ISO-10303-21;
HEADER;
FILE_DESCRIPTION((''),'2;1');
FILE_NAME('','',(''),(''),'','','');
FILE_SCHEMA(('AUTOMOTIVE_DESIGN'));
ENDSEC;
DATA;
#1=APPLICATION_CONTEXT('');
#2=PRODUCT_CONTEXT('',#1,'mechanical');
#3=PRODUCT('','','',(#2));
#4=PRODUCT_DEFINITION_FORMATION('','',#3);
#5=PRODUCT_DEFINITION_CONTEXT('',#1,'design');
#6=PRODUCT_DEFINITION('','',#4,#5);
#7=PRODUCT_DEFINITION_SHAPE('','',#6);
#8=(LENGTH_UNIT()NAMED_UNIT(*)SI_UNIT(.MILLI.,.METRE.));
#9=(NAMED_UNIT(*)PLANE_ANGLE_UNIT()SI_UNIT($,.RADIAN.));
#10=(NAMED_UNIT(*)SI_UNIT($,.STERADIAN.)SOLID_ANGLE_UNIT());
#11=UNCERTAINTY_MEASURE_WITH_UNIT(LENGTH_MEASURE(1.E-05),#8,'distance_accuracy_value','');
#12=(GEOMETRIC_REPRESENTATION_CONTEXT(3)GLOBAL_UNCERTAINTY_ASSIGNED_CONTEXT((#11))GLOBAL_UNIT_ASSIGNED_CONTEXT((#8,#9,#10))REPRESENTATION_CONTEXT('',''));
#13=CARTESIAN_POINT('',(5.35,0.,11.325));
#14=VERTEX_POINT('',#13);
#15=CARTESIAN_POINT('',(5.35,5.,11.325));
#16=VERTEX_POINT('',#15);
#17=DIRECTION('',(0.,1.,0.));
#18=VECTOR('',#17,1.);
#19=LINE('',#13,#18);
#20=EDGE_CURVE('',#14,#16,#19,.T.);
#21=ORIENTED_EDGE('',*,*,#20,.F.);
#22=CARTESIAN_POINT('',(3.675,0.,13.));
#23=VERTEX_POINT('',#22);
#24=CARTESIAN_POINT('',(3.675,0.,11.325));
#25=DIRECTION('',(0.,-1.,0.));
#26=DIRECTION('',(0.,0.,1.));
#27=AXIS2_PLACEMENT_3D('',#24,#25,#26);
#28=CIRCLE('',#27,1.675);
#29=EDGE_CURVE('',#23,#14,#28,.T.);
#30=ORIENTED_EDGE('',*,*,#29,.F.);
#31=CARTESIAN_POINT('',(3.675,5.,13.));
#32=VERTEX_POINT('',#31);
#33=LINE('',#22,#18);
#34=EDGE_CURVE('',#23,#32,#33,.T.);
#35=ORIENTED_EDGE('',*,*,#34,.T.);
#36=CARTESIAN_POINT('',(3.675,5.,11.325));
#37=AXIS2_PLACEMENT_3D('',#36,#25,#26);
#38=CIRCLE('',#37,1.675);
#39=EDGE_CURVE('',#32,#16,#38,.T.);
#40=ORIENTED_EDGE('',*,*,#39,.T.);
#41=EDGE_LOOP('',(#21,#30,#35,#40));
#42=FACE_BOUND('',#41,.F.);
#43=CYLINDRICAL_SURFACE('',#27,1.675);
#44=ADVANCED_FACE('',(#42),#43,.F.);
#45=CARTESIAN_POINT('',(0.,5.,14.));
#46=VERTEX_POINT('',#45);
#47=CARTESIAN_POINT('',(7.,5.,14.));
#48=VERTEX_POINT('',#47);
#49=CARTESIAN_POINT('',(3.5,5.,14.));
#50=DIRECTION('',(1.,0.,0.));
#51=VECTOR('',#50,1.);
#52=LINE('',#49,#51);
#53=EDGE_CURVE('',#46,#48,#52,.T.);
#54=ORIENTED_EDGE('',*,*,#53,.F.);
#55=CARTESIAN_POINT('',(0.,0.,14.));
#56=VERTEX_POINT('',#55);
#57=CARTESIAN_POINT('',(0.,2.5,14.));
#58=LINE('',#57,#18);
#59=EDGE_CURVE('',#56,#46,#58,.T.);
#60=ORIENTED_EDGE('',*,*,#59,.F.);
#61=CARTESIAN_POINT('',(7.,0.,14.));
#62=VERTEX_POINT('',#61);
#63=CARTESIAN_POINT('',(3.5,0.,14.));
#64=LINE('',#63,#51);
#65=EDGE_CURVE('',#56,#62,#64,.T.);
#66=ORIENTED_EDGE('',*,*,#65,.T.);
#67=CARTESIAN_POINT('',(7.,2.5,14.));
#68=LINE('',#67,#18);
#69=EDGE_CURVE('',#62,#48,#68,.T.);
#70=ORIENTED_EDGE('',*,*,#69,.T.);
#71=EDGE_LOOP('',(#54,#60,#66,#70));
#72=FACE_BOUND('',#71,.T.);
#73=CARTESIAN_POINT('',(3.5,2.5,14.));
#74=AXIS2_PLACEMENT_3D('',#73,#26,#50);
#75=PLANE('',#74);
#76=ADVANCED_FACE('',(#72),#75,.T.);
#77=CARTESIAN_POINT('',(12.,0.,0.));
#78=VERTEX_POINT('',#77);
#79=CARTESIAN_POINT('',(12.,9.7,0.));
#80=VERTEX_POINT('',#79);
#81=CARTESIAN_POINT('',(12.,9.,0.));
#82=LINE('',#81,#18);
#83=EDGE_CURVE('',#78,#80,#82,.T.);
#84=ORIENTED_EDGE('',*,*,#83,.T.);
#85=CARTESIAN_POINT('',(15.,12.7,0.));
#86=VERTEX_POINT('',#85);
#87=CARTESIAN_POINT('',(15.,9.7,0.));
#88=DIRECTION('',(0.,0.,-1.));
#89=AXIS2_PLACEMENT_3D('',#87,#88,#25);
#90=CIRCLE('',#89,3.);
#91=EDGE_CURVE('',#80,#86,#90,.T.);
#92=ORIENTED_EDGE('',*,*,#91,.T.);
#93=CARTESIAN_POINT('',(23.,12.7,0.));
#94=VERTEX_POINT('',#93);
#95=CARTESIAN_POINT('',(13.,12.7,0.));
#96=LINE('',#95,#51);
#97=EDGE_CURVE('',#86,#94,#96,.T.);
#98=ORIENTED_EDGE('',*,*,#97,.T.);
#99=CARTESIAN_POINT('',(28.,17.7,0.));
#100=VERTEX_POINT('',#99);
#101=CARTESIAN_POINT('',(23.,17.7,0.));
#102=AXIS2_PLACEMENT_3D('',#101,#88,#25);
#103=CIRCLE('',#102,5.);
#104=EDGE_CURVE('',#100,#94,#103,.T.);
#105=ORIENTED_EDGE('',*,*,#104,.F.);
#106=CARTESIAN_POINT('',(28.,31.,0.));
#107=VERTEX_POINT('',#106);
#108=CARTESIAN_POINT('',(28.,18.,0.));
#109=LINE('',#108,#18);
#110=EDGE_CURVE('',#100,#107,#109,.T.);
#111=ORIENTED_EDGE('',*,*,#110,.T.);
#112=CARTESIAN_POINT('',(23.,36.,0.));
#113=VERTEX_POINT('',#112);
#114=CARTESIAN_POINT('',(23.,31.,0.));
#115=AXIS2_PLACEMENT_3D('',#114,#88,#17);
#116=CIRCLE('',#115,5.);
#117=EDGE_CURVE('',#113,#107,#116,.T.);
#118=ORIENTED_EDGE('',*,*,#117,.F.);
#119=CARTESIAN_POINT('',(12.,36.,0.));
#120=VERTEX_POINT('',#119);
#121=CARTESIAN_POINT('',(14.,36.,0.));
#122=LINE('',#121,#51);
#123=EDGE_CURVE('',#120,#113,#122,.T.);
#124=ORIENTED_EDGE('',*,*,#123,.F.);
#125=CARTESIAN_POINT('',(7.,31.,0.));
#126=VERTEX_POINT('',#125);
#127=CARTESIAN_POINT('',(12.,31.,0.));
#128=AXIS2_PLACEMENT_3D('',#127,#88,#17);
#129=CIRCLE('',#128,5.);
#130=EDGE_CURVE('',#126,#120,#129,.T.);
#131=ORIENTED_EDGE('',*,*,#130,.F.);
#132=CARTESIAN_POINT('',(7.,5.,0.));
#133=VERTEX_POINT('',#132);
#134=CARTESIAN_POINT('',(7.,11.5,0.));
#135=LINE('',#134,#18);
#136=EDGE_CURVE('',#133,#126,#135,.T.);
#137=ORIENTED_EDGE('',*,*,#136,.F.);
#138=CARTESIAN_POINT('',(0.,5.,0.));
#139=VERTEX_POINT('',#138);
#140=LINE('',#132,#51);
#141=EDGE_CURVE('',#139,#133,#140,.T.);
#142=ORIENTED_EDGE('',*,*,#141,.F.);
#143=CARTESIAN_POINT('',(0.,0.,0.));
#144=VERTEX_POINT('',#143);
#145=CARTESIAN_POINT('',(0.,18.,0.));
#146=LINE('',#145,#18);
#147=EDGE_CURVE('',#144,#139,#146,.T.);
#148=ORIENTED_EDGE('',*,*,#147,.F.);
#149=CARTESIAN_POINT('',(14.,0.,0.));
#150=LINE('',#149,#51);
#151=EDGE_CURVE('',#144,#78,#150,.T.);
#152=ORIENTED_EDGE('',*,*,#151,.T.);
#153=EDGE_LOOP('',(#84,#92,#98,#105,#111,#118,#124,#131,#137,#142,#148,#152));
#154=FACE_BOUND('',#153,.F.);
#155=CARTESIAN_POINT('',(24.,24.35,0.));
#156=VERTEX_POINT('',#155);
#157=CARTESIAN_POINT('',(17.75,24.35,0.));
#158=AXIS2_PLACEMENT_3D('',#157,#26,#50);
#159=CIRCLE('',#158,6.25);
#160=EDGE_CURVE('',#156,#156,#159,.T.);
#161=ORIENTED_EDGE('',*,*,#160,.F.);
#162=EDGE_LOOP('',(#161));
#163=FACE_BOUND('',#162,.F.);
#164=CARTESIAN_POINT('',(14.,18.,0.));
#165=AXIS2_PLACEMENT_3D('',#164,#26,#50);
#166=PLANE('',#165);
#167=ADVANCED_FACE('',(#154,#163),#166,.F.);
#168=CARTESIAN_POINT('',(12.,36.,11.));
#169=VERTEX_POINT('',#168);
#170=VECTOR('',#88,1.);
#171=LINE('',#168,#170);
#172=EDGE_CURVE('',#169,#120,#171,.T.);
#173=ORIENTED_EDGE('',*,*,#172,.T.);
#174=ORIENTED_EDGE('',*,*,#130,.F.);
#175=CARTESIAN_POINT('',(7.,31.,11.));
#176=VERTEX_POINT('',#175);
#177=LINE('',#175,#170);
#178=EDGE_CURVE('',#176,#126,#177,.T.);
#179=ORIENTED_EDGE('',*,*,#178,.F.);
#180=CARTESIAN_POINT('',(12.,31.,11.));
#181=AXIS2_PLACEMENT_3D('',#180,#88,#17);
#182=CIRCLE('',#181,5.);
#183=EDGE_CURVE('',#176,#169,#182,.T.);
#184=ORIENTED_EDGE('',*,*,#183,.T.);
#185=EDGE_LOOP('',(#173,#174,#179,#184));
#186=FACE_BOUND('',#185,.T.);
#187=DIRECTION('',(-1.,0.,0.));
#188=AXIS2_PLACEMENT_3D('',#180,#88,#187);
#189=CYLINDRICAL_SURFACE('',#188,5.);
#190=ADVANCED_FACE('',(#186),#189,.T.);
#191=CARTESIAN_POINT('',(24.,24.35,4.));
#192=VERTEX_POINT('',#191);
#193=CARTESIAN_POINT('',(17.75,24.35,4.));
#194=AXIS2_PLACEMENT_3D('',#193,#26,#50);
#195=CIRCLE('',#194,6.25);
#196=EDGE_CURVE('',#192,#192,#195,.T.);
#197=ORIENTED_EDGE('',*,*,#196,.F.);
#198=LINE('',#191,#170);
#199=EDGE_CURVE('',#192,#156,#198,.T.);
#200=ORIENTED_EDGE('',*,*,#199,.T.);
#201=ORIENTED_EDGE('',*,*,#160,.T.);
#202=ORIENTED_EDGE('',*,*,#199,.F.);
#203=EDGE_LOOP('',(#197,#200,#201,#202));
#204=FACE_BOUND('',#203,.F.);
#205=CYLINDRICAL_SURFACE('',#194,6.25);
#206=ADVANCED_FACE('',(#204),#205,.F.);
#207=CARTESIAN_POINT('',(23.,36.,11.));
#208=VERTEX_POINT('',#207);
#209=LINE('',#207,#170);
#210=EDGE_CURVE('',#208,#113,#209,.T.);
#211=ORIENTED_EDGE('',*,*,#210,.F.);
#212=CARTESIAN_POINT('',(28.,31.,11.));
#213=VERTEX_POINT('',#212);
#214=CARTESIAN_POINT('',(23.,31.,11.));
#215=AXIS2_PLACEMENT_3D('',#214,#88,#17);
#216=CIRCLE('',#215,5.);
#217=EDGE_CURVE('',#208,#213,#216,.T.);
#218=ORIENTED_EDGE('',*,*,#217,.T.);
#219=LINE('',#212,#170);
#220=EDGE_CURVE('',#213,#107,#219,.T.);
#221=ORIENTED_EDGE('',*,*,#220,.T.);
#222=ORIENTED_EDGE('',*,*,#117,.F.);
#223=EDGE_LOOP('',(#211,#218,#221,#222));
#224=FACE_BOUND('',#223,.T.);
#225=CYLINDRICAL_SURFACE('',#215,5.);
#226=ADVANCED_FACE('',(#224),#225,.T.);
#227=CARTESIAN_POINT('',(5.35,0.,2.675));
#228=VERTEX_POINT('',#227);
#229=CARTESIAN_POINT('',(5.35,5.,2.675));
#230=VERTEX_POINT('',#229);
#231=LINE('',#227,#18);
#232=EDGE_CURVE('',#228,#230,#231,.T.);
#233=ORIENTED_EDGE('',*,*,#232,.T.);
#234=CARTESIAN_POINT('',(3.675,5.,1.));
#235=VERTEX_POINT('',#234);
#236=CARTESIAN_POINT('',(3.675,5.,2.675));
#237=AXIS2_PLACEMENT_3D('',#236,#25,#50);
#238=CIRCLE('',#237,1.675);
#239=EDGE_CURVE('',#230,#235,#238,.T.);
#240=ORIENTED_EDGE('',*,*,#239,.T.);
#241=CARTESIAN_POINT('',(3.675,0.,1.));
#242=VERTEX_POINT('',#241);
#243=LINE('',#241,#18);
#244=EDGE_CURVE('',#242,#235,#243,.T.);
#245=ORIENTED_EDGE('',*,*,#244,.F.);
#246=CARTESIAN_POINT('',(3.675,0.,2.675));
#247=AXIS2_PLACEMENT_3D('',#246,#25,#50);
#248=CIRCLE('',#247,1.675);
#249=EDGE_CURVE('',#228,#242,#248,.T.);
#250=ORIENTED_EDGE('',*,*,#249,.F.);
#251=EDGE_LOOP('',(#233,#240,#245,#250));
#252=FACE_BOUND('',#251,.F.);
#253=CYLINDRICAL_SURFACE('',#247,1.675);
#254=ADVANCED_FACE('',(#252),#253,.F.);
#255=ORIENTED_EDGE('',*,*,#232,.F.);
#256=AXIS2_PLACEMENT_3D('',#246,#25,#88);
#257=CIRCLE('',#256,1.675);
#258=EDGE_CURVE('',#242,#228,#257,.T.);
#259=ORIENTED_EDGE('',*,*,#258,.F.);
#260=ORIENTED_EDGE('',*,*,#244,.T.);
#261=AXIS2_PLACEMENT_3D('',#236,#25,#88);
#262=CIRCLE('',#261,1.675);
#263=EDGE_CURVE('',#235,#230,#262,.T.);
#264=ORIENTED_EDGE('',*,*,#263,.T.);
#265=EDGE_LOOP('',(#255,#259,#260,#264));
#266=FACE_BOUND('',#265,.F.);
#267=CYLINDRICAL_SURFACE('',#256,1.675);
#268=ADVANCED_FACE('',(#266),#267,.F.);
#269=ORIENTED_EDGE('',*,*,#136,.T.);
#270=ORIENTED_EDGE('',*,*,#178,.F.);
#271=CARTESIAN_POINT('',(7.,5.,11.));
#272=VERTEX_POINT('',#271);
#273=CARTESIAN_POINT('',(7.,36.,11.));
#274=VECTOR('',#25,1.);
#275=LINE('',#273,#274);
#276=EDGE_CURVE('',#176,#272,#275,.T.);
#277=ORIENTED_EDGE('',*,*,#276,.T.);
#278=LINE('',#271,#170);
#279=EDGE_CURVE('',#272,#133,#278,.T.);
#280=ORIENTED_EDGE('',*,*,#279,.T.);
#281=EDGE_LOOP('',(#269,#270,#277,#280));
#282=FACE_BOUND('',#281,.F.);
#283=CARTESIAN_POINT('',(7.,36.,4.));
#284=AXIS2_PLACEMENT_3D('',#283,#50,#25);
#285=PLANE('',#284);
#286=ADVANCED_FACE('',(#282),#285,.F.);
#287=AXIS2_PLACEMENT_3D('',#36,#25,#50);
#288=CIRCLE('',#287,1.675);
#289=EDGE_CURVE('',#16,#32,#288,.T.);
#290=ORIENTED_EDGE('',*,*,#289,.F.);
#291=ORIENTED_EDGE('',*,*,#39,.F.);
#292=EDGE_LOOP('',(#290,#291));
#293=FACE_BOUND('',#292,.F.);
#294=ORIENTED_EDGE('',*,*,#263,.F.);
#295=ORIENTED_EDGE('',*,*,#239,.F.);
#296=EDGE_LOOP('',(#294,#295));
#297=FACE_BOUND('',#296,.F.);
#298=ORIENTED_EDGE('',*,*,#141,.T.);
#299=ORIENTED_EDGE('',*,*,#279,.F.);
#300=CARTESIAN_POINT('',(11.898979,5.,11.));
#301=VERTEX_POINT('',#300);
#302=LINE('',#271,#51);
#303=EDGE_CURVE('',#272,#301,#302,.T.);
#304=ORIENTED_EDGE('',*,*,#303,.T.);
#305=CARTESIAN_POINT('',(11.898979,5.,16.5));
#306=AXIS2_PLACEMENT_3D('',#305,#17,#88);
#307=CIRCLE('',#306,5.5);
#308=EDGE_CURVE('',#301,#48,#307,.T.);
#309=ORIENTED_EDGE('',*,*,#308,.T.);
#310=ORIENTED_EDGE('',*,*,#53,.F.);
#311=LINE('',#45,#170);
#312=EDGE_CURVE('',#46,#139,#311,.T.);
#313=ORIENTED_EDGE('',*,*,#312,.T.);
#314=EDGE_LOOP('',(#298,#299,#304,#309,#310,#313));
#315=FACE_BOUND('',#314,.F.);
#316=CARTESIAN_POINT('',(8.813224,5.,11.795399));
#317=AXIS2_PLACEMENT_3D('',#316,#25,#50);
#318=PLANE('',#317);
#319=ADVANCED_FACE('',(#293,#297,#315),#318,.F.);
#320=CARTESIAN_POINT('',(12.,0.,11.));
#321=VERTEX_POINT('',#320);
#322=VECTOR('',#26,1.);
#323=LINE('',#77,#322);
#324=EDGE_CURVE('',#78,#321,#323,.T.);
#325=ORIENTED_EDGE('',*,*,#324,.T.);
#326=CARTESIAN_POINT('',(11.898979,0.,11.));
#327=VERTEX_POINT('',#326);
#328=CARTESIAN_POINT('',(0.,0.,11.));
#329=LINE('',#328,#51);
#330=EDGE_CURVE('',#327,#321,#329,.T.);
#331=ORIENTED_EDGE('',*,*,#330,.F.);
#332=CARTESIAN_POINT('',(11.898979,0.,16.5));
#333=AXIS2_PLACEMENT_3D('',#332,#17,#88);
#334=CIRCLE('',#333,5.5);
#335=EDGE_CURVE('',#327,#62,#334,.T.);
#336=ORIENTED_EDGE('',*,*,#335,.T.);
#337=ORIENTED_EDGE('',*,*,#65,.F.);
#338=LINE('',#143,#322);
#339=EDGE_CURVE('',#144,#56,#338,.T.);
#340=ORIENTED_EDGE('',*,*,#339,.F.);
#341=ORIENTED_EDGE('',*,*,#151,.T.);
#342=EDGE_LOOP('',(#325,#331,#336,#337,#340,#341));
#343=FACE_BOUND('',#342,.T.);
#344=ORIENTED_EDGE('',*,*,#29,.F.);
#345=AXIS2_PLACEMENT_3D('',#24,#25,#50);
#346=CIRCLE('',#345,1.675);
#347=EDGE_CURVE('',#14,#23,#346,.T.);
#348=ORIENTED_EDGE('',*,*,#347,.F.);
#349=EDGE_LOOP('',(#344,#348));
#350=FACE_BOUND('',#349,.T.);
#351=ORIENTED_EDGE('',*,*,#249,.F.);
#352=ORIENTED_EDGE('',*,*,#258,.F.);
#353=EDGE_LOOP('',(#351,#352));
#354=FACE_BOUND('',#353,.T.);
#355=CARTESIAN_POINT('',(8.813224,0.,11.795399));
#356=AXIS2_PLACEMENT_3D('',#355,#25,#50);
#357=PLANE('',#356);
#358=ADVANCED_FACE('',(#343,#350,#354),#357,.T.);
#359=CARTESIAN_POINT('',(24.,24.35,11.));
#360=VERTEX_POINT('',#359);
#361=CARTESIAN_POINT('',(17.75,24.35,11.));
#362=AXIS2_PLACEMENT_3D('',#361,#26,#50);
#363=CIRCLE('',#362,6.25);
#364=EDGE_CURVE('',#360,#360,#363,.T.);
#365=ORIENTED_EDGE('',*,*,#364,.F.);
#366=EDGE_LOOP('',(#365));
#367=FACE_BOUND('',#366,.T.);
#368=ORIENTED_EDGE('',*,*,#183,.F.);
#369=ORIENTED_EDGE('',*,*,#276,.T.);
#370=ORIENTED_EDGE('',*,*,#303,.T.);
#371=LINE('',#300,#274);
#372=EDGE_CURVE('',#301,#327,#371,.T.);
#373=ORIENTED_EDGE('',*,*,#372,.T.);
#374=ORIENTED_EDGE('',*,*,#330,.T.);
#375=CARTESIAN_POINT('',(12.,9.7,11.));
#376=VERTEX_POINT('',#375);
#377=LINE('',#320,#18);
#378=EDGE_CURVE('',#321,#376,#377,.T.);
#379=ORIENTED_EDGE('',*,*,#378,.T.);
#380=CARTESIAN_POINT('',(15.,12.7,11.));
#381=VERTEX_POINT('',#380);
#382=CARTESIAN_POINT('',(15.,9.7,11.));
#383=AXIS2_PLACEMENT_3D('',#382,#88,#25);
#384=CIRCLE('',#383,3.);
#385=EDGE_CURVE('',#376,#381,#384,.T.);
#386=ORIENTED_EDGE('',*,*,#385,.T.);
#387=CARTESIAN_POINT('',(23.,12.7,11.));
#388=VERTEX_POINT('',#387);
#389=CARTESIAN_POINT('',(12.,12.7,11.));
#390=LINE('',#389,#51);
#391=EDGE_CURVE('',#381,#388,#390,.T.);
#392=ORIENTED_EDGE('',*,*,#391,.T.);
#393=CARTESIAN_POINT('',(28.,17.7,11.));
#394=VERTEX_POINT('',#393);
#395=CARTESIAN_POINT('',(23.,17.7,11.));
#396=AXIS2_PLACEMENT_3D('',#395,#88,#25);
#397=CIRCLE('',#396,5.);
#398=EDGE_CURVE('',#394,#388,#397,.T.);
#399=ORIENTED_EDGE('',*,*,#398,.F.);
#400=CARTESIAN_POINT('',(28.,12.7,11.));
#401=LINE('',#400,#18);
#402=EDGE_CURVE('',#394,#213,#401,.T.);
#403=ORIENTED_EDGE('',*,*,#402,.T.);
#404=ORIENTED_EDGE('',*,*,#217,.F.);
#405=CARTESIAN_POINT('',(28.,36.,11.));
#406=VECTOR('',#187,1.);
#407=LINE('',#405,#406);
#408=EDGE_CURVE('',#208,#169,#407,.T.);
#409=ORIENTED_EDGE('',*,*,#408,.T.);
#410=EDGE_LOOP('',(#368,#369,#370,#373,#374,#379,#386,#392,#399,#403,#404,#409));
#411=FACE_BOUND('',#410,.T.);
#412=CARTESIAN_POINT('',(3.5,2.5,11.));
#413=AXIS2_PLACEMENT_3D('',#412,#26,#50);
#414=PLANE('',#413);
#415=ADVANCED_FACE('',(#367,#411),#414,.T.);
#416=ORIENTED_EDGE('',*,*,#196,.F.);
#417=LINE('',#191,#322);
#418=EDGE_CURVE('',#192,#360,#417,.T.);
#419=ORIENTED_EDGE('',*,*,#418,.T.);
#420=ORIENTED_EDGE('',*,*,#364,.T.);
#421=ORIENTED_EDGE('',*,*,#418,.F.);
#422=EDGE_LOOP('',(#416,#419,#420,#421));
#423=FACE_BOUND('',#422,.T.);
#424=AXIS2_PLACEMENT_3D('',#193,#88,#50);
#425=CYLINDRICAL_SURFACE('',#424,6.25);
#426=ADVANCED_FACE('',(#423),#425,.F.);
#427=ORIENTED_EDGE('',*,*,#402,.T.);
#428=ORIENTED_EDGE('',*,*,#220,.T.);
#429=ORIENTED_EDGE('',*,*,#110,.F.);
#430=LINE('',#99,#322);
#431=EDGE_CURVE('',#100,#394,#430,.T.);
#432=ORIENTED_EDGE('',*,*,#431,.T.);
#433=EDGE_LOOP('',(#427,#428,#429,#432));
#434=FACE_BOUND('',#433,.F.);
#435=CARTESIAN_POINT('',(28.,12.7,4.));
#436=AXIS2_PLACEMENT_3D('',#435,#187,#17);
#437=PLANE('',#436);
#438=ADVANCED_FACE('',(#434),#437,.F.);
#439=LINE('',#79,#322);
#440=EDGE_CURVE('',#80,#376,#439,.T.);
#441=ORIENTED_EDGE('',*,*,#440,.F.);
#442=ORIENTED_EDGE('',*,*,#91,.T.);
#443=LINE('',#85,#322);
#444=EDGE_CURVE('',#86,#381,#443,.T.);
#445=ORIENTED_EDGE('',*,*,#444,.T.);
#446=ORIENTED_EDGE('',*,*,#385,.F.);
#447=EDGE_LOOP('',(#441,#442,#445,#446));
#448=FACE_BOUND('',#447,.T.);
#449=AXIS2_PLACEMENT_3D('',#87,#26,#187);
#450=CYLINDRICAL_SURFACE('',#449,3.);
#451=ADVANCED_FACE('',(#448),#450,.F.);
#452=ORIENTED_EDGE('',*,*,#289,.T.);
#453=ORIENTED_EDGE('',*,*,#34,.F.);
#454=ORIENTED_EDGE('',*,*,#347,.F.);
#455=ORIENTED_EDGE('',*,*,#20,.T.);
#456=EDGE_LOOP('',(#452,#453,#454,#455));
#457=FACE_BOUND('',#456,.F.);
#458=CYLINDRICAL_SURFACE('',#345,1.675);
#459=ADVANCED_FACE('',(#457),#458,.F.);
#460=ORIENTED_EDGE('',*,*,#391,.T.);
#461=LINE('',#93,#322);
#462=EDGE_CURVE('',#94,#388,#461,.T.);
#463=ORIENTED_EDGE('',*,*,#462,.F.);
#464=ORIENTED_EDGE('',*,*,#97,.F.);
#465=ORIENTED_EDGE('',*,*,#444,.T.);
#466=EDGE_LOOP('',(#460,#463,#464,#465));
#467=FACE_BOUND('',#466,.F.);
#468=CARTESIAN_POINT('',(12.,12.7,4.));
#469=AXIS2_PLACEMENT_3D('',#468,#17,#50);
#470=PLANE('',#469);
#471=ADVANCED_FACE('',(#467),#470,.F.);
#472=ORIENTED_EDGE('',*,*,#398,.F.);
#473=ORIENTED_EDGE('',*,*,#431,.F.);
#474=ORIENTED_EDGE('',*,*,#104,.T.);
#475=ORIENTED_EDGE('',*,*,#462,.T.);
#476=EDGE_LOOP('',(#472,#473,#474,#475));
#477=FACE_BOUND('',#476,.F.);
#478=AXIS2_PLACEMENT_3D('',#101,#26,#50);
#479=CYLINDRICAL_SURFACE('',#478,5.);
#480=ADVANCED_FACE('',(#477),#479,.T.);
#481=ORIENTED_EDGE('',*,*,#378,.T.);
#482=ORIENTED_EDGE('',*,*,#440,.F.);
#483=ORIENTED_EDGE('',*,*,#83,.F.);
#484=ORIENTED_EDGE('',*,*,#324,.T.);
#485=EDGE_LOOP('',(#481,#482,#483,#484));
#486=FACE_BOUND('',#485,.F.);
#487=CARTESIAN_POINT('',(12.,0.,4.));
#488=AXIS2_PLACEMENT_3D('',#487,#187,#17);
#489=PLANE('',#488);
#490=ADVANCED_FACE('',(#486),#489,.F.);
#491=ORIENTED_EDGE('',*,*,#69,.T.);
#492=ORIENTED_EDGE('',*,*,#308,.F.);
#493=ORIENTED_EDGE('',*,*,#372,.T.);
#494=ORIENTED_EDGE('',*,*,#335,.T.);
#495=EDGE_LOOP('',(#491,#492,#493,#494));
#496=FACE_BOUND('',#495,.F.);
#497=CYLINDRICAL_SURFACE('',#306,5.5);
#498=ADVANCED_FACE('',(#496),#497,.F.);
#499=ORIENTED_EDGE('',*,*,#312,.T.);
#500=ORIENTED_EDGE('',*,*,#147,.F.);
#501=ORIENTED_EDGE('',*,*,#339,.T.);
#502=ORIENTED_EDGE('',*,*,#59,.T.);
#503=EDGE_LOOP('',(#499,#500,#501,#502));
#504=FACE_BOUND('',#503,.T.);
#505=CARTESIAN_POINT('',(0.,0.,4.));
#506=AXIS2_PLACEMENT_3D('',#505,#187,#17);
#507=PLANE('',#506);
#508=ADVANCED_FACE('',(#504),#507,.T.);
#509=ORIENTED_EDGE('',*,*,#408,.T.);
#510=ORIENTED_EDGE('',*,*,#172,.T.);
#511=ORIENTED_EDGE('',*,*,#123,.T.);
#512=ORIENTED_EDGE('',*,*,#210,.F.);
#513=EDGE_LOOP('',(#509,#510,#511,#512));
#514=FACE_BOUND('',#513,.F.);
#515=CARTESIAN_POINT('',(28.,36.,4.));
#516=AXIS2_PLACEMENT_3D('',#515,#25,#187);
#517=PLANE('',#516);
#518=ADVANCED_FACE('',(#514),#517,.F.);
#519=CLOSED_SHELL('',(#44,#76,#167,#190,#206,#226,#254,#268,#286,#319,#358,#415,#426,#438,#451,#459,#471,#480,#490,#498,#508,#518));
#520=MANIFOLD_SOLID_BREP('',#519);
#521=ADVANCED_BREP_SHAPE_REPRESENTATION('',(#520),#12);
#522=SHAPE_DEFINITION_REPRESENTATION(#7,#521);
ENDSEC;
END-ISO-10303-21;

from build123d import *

# Parameters (mm, degrees)
F0_W         = 28
F0_H         = 36
F1_DEPTH     = 4
F2_R         = 6.25
F2_W         = 7
F2_H         = 31
F2_W_2       = 16
F2_H_2       = 12.7
F3_DEPTH     = 25
F4_W         = 7
F4_H         = 5
F4_R         = 6.25
F5_DEPTH     = 7
F6_DEPTH     = 10
F8_DEPTH     = 25
F9_R         = 5
F10_R        = 3
F11_T1_DEPTH = 5


# Not quite as in the source:
# - a fillet or chamfer that OpenCascade refuses, or shapes differently, is made with other operations: its cross-section is extruded or revolved along the edge and cut away or added


with BuildPart() as f1:
    # F0 (on Top) → F1 (new body)
    with BuildSketch(Plane.XY):
        with Locations((14, 18)):
            Rectangle(F0_W, F0_H)
    extrude(amount=F1_DEPTH)

    # F2 (on face) → F3 (cut)
    with BuildSketch(Plane.XY.offset(4)):
        with Locations((17.75, 24.35)):
            Circle(F2_R)
        with Locations((3.5, 20.5)):
            Rectangle(F2_W, F2_H)
        with Locations((20, 6.35)):
            Rectangle(F2_W_2, F2_H_2)
    extrude(amount=-F3_DEPTH, mode=Mode.SUBTRACT)

    # F4 (on face) → F5 (join)
    with BuildSketch(Plane.XY.offset(4)):
        with Locations((3.5, 2.5)):
            Rectangle(F4_W, F4_H)
        Polygon((7, 36), (7, 5), (7, 0), (12, 0), (12, 12.7), (28, 12.7), (28, 36), align=None)
        with Locations((17.75, 24.35)):
            Circle(F4_R, mode=Mode.SUBTRACT)
    extrude(amount=F5_DEPTH)

    # F4 (on face) → F6 (join)
    with BuildSketch(Plane.XY.offset(4)):
        with Locations((3.5, 2.5)):
            Rectangle(F4_W, F4_H)
    extrude(amount=F6_DEPTH)

    # F7 (on face) → F8 (cut)
    with BuildSketch(Plane.XZ):
        with BuildLine():
            ThreePointArc((3.675, 13), (2.4905961415, 10.1405961415), (5.35, 11.325))
            ThreePointArc((5.35, 11.325), (4.8594038585, 12.5094038585), (3.675, 13))
        make_face()
        with BuildLine():
            ThreePointArc((3.675, 1), (4.8594038585, 1.4905961415), (5.35, 2.675))
            ThreePointArc((5.35, 2.675), (2.4905961415, 3.8594038585), (3.675, 1))
        make_face()
    extrude(amount=-F8_DEPTH, mode=Mode.SUBTRACT)

    # F9
    f9_edges = [f1.edges().sort_by_distance(p)[0] for p in [
        (28, 36, 5.5),
        (7, 36, 5.5),
        (28, 12.7, 5.5),
    ]]
    fillet(f9_edges, radius=F9_R)

    # F10
    f10_edges = [f1.edges().sort_by_distance(p)[0] for p in [
        (12, 12.7, 5.5),
    ]]
    fillet(f10_edges, radius=F10_R)

    # F11: fillet of radius 5.5 on 1 edges, made by hand

    # F11_s2 → F11_t1 (join)
    with BuildSketch(Plane.XZ.offset(-5)):
        with BuildLine():
            ThreePointArc((11.8989794856, 11), (9.0266981623, 11.8095842402), (7, 14))
            Line((7, 14), (7, 11))
            Line((7, 11), (11.8989794856, 11))
        make_face()
    extrude(amount=F11_T1_DEPTH)


solid = f1.part
